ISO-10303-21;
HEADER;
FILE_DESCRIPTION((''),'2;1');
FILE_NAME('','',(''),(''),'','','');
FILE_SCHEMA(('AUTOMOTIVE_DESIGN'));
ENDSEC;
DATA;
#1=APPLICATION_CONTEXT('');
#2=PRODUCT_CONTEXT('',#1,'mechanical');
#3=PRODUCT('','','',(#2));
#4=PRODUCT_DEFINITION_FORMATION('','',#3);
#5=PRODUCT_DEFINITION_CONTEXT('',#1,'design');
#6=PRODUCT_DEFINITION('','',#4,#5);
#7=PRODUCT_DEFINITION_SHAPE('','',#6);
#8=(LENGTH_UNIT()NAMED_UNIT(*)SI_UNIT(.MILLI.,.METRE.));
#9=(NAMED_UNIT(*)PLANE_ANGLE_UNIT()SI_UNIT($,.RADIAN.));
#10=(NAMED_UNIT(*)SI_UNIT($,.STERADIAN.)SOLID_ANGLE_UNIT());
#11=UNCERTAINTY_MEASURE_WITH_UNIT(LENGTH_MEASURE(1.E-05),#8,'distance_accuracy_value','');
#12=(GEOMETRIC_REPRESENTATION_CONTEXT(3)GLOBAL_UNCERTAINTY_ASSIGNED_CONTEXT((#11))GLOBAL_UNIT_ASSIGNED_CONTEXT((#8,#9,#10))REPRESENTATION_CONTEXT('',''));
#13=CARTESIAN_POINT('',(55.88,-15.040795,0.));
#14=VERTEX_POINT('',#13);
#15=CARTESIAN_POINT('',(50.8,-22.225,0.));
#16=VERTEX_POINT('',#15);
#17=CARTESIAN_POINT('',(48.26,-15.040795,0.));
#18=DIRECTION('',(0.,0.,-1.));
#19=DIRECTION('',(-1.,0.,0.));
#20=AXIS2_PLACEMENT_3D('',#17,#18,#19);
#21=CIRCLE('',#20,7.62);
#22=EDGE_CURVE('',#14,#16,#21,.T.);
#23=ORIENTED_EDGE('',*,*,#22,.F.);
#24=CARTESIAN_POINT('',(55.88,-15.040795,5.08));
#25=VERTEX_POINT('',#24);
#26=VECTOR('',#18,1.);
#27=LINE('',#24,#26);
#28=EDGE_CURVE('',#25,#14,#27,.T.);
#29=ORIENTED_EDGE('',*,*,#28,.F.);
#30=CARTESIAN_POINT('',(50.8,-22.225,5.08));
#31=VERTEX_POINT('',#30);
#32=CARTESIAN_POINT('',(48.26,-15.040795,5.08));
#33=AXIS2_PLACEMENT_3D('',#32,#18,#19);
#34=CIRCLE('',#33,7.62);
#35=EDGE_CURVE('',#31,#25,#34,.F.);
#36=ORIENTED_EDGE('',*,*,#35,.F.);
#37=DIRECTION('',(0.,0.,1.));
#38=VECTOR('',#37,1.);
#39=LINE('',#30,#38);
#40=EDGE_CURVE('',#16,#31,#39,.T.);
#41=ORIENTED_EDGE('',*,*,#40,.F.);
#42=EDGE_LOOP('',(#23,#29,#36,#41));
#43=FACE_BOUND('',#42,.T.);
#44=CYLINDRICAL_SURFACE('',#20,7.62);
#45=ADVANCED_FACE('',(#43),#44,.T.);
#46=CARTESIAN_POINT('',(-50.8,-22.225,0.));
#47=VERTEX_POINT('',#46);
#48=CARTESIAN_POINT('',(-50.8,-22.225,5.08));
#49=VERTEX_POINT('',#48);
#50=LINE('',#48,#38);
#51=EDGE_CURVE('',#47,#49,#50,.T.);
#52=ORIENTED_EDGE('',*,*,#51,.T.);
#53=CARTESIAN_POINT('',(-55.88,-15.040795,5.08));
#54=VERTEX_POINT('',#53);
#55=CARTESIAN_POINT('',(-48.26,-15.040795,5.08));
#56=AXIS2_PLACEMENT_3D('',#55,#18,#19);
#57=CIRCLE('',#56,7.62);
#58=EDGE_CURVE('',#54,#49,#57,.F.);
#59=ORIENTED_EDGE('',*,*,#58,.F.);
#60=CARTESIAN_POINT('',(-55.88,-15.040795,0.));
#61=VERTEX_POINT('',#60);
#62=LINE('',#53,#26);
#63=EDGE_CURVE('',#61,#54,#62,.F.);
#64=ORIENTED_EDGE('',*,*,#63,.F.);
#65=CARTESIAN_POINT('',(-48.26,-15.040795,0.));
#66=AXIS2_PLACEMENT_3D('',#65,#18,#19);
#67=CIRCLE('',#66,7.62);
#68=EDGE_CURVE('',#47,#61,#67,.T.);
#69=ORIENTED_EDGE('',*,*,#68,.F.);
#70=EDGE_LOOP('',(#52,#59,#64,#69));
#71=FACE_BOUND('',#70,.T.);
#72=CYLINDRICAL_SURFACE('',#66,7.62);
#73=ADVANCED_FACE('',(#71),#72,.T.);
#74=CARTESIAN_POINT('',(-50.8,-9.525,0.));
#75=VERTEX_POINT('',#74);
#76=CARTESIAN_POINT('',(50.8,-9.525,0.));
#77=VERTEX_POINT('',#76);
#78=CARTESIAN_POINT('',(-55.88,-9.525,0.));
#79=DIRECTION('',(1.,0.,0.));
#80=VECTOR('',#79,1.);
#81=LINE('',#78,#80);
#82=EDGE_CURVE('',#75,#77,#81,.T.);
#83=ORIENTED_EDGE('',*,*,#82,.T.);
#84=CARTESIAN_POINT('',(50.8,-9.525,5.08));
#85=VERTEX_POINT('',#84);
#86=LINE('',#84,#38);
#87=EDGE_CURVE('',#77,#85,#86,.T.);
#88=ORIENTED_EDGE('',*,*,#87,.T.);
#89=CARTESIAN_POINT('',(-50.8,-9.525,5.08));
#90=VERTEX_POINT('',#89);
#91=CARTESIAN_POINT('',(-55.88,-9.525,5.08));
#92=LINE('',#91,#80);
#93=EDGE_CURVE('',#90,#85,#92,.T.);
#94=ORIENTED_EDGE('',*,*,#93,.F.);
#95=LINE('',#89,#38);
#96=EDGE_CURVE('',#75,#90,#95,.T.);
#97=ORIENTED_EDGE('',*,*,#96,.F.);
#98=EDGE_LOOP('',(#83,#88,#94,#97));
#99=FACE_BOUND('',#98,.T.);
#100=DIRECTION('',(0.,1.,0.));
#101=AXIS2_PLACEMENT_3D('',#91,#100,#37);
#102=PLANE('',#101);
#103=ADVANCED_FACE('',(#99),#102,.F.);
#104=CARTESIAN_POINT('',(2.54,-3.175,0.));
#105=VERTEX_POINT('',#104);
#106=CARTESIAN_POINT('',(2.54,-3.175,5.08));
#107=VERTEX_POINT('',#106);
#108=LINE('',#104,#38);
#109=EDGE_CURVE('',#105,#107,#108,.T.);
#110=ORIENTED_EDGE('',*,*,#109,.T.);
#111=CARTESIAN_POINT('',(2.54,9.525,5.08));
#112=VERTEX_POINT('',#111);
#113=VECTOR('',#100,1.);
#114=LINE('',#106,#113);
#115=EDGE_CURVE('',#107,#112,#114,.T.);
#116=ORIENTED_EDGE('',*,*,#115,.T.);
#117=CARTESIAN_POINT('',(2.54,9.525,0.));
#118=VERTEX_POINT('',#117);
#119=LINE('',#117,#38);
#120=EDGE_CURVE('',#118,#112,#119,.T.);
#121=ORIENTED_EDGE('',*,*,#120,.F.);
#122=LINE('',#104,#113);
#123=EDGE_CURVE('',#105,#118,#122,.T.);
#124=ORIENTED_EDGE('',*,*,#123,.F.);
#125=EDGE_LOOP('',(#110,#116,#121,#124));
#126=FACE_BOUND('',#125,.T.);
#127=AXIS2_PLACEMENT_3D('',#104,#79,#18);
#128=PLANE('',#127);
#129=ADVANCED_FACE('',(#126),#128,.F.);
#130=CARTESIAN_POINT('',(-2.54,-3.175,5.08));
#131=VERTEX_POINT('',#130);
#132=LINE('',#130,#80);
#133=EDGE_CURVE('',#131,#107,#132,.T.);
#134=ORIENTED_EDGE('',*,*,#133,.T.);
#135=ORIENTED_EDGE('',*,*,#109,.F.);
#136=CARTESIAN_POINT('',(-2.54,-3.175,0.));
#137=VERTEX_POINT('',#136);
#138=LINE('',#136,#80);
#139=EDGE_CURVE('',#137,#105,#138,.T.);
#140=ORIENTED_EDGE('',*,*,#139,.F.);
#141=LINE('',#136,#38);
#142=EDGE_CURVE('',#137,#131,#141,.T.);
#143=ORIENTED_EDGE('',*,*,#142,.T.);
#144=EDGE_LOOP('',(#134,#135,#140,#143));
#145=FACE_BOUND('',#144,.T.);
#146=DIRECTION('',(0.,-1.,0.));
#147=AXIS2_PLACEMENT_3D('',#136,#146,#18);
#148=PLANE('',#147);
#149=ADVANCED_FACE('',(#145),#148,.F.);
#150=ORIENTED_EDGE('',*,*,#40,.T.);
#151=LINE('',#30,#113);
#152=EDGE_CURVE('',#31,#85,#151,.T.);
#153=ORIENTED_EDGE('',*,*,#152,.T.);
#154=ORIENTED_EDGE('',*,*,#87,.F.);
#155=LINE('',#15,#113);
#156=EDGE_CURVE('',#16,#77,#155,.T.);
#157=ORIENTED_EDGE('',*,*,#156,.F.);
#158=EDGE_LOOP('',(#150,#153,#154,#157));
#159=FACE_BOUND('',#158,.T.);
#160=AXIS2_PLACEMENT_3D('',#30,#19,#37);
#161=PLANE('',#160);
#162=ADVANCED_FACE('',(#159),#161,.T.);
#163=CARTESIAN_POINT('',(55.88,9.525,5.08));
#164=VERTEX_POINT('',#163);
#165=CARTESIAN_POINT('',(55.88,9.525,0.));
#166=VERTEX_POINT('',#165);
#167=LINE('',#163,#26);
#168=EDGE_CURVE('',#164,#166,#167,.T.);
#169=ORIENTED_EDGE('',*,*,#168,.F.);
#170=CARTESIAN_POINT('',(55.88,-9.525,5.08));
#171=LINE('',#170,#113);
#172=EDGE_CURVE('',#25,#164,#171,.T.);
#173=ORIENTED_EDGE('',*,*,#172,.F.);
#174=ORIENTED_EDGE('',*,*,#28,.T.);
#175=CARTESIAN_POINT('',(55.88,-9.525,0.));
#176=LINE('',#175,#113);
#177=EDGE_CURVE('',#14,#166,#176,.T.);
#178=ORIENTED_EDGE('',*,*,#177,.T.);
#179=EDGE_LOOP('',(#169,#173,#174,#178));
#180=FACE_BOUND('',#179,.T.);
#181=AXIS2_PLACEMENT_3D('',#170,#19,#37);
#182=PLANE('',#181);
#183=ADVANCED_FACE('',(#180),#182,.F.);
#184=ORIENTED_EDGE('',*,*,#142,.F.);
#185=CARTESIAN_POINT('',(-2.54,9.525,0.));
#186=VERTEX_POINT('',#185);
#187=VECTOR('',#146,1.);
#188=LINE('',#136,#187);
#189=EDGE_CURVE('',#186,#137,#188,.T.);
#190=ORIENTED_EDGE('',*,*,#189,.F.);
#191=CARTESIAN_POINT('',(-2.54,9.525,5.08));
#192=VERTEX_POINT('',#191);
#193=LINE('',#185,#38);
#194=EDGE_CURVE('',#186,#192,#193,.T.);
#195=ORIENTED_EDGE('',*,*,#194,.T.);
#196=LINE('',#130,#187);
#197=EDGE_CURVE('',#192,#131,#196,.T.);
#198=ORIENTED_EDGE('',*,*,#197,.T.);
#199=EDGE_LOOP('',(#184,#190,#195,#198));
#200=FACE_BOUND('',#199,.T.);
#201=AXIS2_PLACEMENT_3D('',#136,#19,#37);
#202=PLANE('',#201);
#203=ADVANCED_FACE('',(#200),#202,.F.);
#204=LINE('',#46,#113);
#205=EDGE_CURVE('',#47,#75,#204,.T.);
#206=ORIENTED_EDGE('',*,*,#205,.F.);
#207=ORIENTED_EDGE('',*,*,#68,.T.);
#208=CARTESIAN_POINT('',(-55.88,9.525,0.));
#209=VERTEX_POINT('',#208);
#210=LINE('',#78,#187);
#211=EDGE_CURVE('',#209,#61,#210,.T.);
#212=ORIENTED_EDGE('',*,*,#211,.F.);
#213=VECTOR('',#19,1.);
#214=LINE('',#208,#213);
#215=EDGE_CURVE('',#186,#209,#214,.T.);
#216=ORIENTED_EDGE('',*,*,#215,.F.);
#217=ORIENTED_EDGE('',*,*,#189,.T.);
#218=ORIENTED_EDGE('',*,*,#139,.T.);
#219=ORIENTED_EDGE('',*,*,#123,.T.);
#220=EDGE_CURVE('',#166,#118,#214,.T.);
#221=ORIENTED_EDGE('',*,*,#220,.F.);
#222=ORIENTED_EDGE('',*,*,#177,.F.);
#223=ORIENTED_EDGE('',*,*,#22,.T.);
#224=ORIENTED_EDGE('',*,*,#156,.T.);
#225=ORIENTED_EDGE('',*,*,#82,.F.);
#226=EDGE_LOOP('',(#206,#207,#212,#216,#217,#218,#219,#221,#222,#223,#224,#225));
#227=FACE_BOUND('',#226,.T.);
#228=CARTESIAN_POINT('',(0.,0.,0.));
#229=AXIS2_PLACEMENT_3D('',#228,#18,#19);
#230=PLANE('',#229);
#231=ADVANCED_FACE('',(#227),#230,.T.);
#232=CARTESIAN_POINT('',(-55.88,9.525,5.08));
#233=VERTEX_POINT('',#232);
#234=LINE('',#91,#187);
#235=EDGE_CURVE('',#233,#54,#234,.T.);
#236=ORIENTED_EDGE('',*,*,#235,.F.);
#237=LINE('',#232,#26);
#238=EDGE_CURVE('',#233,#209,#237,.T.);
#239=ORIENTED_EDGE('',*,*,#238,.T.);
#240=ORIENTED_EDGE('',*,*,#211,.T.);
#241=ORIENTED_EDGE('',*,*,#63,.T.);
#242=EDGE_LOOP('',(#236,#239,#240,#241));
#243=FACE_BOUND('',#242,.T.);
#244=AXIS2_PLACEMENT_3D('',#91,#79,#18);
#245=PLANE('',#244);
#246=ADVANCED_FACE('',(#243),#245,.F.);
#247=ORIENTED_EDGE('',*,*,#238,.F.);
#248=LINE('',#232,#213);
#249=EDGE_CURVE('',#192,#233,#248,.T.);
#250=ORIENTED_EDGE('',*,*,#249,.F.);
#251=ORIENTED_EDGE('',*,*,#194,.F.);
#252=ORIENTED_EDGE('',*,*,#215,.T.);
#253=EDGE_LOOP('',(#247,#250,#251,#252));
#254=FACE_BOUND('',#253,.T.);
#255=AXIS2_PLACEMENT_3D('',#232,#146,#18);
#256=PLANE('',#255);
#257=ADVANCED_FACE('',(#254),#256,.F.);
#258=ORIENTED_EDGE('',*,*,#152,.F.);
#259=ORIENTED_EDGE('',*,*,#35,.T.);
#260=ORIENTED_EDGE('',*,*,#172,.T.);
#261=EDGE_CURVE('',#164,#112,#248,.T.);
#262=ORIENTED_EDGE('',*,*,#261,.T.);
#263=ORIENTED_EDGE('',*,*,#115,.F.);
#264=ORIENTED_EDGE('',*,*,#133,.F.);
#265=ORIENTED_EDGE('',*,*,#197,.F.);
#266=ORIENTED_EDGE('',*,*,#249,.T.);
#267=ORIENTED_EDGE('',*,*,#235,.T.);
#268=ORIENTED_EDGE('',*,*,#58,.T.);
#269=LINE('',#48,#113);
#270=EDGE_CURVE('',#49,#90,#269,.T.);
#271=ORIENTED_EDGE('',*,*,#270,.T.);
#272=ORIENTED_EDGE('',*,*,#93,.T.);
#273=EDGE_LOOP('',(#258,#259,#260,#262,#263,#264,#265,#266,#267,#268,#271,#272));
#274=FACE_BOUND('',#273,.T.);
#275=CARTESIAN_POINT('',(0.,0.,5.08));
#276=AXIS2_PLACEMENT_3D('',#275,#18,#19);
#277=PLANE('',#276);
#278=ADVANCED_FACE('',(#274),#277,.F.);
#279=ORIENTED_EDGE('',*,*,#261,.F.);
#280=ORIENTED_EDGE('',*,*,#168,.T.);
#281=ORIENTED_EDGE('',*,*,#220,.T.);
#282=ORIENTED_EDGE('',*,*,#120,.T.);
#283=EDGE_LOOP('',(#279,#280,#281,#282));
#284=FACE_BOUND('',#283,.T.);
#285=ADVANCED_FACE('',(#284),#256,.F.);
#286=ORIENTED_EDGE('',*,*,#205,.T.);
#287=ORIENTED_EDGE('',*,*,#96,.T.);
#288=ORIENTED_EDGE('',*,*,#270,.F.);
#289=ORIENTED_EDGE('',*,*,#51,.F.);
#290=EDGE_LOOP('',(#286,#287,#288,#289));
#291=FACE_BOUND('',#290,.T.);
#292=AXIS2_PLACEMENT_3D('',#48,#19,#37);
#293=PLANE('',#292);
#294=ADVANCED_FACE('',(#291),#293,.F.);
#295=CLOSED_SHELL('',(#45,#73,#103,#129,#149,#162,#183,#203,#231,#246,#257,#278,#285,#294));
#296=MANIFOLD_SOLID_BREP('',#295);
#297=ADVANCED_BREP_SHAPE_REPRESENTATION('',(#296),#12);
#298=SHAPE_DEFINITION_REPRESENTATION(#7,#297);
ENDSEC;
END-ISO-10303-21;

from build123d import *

# Parameters (mm, degrees)
SKETCH1_W           = 111.76
SKETCH1_H           = 19.05
BOSS_EXTRUDE1_DEPTH = 5.08
SKETCH5_W           = 5.08
SKETCH5_H           = 5.08
BOSS_EXTRUDE3_DEPTH = 12.7
FILLET2_R           = 7.62
SKETCH7_W           = 5.08
SKETCH7_H           = 12.7
CUT_EXTRUDE2_DEPTH  = 61.35173092


with BuildPart() as part:
    # Sketch1 → Boss-Extrude1 (new body)
    with BuildSketch(Plane.XY):
        Rectangle(SKETCH1_W, SKETCH1_H)
    extrude(amount=BOSS_EXTRUDE1_DEPTH)

    # Sketch5 → Boss-Extrude3 (add)
    with BuildSketch(Plane.XZ.offset(9.525)):
        with Locations((-53.34, 2.54)):
            Rectangle(SKETCH5_W, SKETCH5_H)
    boss_extrude3 = extrude(amount=BOSS_EXTRUDE3_DEPTH)

    # Mirror1: Boss-Extrude3 across plane
    add(boss_extrude3.mirror(Plane(origin=(0, 0, 0), x_dir=(0, 0, 1), z_dir=(1, 0, 0))))

    # Fillet2
    # the kernel refuses this fillet: 7.62 mm, written as the material it takes off along each edge
    with BuildSketch(Plane(origin=(-55.88, -22.225, -17.960512242), x_dir=(1, 0, 0), z_dir=(0, 0, 1))) as fillet2_piece_1:
        with BuildLine():
            CenterArc((7.62, 7.184204897), FILLET2_R, 180, 70.528779366)
            Line((0, 7.184204897), (-0.1524, 7.184204897))
            Line((-0.1524, 7.184204897), (-0.1524, 0))
            Line((-0.1524, 0), (0, -0.1524))
            ThreePointArc((0, -0.1524), (2.54, -0.1524), (5.0292, -0.143684098))
            Line((5.0292, -0.143684098), (5.08, 0))
        make_face()
    extrude(amount=41.001024484, mode=Mode.SUBTRACT)
    with BuildSketch(Plane(origin=(55.88, -22.225, -17.960512242), x_dir=(0, 1, 0), z_dir=(0, 0, 1))) as fillet2_piece_2:
        with BuildLine():
            CenterArc((7.184204897, 7.62), FILLET2_R, 199.471220634, 70.528779366)
            Line((0, 5.08), (-0.143684098, 5.0292))
            ThreePointArc((-0.143684098, 5.0292), (-0.1524, 2.54), (-0.1524, 0))
            Line((-0.1524, 0), (0, -0.1524))
            Line((0, -0.1524), (7.184204897, -0.1524))
            Line((7.184204897, -0.1524), (7.184204897, 0))
        make_face()
    extrude(amount=41.001024484, mode=Mode.SUBTRACT)

    # Sketch7 → Cut-Extrude2 (cut, through all)
    with BuildSketch(Plane.XY.offset(5.08)):
        with Locations((0, 3.175)):
            Rectangle(SKETCH7_W, SKETCH7_H)
    extrude(amount=-CUT_EXTRUDE2_DEPTH, mode=Mode.SUBTRACT)


solid = part.part
